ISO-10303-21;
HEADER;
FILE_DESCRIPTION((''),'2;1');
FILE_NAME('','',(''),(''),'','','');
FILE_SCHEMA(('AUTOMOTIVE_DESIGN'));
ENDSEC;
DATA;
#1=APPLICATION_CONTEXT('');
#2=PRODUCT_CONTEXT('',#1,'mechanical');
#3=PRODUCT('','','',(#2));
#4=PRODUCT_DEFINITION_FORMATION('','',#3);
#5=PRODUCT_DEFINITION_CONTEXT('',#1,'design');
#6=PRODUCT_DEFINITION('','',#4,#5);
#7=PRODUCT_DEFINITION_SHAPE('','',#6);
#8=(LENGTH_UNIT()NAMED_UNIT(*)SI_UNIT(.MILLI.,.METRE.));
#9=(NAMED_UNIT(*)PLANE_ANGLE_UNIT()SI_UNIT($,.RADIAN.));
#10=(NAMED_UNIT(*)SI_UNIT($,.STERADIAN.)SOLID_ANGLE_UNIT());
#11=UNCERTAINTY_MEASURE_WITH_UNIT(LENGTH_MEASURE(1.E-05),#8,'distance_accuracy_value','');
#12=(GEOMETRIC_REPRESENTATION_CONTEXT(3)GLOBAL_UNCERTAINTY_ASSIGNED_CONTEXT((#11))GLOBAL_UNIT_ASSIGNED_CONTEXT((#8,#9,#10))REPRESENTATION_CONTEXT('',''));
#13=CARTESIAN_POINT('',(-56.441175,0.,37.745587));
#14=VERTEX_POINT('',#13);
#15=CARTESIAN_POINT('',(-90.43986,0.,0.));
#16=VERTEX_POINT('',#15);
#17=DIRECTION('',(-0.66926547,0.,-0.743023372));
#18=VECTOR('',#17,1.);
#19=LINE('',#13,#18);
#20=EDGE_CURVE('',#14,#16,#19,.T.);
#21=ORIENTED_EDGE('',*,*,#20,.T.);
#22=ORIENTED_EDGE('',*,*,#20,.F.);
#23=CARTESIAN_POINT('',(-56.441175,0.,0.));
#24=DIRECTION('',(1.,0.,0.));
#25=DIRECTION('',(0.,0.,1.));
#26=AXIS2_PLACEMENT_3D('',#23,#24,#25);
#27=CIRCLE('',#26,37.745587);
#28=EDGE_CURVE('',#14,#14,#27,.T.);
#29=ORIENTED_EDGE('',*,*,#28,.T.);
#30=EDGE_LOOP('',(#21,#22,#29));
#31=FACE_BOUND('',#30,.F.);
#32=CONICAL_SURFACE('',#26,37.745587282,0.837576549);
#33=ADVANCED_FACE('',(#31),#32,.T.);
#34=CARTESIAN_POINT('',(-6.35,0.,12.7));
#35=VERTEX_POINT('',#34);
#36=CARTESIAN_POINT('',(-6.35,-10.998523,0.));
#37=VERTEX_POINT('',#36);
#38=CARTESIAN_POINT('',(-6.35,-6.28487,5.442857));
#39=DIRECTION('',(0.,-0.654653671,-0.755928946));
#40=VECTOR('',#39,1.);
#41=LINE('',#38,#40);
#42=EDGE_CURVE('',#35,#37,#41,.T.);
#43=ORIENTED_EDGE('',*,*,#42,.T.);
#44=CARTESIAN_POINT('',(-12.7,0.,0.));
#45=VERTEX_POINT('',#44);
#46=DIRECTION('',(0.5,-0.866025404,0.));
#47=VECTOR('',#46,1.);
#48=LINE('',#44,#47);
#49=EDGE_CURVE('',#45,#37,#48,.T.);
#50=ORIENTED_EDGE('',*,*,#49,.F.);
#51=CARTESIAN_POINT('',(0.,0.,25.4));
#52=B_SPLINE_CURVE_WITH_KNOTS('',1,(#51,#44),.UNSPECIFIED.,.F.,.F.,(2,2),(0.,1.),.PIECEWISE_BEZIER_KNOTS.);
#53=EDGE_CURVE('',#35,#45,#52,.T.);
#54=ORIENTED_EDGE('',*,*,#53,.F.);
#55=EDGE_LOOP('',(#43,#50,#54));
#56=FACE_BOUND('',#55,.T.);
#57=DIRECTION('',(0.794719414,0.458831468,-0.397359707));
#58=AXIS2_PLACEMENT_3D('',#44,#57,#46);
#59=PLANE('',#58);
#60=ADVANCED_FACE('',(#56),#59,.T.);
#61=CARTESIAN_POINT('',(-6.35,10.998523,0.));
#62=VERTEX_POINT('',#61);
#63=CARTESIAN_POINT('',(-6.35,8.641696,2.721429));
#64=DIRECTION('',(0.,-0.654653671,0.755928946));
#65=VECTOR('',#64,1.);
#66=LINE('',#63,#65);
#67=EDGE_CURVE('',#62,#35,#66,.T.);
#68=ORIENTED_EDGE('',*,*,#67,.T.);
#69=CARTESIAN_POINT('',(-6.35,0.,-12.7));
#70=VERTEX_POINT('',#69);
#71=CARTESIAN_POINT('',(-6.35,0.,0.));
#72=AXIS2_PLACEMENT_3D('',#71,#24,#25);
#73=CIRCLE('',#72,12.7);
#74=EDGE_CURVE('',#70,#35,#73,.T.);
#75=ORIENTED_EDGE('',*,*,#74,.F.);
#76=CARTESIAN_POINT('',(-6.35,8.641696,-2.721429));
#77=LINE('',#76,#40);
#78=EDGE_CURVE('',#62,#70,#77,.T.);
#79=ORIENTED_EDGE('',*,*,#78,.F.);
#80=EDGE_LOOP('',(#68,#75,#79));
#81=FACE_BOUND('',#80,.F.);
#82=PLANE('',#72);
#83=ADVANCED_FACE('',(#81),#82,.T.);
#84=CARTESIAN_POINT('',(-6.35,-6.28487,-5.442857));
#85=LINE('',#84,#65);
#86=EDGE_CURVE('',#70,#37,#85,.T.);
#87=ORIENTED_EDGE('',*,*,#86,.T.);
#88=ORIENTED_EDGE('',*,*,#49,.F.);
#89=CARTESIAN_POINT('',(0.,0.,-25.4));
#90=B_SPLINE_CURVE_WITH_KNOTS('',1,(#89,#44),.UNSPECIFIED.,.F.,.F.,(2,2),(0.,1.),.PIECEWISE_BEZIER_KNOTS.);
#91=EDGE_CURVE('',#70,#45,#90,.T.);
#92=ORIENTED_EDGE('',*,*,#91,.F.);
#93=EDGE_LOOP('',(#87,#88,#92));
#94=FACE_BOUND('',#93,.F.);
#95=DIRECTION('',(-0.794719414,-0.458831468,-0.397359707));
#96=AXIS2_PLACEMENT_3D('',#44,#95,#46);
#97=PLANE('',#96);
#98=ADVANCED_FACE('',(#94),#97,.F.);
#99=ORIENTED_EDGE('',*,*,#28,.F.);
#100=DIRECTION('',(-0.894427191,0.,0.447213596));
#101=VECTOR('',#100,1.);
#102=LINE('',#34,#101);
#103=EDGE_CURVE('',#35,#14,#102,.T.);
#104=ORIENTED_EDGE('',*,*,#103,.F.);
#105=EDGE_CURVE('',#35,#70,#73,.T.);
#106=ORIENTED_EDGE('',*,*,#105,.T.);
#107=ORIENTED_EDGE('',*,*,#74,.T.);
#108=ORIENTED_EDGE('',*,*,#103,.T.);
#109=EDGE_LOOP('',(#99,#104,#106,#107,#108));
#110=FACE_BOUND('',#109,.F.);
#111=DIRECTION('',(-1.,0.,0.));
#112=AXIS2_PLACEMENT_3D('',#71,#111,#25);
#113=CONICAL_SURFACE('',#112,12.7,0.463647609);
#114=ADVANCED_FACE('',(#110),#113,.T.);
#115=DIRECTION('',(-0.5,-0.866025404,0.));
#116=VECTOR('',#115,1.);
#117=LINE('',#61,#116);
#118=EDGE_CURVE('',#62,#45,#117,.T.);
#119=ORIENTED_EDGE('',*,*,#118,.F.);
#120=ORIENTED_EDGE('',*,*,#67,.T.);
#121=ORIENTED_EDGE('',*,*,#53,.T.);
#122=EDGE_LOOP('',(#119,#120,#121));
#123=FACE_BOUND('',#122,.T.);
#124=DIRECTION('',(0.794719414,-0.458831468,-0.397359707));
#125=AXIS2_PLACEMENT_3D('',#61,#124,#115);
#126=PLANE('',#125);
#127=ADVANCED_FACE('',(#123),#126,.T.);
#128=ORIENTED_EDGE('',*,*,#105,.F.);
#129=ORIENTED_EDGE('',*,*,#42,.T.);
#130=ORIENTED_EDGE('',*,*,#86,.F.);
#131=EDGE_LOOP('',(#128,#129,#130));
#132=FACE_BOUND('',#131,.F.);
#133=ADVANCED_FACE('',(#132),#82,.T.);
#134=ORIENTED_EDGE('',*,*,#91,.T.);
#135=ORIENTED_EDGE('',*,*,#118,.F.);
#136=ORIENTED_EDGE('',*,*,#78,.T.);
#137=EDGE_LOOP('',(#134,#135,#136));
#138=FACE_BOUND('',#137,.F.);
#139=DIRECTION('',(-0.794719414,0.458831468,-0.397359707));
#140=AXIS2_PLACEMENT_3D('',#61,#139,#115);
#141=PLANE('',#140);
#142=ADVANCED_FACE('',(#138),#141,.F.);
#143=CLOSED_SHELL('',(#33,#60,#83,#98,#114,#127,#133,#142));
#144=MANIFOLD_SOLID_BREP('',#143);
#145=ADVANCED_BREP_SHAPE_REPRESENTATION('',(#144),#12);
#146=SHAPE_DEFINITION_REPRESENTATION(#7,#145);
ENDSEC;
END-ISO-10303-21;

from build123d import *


with BuildPart() as f1:
    # F0 (on Front) → F1 (revolve)
    with BuildSketch(Plane.XZ):
        Polygon((-6.35, 0), (-6.35, 12.7), (-12.7, 0), align=None)
        Polygon((-12.7, 0), (-6.35, 12.7), (-56.4411745648, 37.7455872824), (-90.4398604321, 0), align=None)
    revolve(axis=Axis((-6.35, 0, 0), (1, 0, 0)))

    # F2 (on Top) → F7 section 0
    with BuildSketch(Plane.XY, mode=Mode.PRIVATE) as f7_s0:
        Polygon((-6.35, -10.9985226281), (6.35, -10.9985226281), (12.7, 0), (6.35, 10.9985226281), (-6.35, 10.9985226281), (-12.7, 0), align=None)
    loft([Vertex(0, 0, -25.4), f7_s0.sketch], mode=Mode.SUBTRACT)

    # F2 (on Top) → F8 section 0
    with BuildSketch(Plane.XY, mode=Mode.PRIVATE) as f8_s0:
        Polygon((-6.35, -10.9985226281), (6.35, -10.9985226281), (12.7, 0), (6.35, 10.9985226281), (-6.35, 10.9985226281), (-12.7, 0), align=None)
    loft([Vertex(0, 0, 25.4), f8_s0.sketch], mode=Mode.SUBTRACT)


solid = f1.part
